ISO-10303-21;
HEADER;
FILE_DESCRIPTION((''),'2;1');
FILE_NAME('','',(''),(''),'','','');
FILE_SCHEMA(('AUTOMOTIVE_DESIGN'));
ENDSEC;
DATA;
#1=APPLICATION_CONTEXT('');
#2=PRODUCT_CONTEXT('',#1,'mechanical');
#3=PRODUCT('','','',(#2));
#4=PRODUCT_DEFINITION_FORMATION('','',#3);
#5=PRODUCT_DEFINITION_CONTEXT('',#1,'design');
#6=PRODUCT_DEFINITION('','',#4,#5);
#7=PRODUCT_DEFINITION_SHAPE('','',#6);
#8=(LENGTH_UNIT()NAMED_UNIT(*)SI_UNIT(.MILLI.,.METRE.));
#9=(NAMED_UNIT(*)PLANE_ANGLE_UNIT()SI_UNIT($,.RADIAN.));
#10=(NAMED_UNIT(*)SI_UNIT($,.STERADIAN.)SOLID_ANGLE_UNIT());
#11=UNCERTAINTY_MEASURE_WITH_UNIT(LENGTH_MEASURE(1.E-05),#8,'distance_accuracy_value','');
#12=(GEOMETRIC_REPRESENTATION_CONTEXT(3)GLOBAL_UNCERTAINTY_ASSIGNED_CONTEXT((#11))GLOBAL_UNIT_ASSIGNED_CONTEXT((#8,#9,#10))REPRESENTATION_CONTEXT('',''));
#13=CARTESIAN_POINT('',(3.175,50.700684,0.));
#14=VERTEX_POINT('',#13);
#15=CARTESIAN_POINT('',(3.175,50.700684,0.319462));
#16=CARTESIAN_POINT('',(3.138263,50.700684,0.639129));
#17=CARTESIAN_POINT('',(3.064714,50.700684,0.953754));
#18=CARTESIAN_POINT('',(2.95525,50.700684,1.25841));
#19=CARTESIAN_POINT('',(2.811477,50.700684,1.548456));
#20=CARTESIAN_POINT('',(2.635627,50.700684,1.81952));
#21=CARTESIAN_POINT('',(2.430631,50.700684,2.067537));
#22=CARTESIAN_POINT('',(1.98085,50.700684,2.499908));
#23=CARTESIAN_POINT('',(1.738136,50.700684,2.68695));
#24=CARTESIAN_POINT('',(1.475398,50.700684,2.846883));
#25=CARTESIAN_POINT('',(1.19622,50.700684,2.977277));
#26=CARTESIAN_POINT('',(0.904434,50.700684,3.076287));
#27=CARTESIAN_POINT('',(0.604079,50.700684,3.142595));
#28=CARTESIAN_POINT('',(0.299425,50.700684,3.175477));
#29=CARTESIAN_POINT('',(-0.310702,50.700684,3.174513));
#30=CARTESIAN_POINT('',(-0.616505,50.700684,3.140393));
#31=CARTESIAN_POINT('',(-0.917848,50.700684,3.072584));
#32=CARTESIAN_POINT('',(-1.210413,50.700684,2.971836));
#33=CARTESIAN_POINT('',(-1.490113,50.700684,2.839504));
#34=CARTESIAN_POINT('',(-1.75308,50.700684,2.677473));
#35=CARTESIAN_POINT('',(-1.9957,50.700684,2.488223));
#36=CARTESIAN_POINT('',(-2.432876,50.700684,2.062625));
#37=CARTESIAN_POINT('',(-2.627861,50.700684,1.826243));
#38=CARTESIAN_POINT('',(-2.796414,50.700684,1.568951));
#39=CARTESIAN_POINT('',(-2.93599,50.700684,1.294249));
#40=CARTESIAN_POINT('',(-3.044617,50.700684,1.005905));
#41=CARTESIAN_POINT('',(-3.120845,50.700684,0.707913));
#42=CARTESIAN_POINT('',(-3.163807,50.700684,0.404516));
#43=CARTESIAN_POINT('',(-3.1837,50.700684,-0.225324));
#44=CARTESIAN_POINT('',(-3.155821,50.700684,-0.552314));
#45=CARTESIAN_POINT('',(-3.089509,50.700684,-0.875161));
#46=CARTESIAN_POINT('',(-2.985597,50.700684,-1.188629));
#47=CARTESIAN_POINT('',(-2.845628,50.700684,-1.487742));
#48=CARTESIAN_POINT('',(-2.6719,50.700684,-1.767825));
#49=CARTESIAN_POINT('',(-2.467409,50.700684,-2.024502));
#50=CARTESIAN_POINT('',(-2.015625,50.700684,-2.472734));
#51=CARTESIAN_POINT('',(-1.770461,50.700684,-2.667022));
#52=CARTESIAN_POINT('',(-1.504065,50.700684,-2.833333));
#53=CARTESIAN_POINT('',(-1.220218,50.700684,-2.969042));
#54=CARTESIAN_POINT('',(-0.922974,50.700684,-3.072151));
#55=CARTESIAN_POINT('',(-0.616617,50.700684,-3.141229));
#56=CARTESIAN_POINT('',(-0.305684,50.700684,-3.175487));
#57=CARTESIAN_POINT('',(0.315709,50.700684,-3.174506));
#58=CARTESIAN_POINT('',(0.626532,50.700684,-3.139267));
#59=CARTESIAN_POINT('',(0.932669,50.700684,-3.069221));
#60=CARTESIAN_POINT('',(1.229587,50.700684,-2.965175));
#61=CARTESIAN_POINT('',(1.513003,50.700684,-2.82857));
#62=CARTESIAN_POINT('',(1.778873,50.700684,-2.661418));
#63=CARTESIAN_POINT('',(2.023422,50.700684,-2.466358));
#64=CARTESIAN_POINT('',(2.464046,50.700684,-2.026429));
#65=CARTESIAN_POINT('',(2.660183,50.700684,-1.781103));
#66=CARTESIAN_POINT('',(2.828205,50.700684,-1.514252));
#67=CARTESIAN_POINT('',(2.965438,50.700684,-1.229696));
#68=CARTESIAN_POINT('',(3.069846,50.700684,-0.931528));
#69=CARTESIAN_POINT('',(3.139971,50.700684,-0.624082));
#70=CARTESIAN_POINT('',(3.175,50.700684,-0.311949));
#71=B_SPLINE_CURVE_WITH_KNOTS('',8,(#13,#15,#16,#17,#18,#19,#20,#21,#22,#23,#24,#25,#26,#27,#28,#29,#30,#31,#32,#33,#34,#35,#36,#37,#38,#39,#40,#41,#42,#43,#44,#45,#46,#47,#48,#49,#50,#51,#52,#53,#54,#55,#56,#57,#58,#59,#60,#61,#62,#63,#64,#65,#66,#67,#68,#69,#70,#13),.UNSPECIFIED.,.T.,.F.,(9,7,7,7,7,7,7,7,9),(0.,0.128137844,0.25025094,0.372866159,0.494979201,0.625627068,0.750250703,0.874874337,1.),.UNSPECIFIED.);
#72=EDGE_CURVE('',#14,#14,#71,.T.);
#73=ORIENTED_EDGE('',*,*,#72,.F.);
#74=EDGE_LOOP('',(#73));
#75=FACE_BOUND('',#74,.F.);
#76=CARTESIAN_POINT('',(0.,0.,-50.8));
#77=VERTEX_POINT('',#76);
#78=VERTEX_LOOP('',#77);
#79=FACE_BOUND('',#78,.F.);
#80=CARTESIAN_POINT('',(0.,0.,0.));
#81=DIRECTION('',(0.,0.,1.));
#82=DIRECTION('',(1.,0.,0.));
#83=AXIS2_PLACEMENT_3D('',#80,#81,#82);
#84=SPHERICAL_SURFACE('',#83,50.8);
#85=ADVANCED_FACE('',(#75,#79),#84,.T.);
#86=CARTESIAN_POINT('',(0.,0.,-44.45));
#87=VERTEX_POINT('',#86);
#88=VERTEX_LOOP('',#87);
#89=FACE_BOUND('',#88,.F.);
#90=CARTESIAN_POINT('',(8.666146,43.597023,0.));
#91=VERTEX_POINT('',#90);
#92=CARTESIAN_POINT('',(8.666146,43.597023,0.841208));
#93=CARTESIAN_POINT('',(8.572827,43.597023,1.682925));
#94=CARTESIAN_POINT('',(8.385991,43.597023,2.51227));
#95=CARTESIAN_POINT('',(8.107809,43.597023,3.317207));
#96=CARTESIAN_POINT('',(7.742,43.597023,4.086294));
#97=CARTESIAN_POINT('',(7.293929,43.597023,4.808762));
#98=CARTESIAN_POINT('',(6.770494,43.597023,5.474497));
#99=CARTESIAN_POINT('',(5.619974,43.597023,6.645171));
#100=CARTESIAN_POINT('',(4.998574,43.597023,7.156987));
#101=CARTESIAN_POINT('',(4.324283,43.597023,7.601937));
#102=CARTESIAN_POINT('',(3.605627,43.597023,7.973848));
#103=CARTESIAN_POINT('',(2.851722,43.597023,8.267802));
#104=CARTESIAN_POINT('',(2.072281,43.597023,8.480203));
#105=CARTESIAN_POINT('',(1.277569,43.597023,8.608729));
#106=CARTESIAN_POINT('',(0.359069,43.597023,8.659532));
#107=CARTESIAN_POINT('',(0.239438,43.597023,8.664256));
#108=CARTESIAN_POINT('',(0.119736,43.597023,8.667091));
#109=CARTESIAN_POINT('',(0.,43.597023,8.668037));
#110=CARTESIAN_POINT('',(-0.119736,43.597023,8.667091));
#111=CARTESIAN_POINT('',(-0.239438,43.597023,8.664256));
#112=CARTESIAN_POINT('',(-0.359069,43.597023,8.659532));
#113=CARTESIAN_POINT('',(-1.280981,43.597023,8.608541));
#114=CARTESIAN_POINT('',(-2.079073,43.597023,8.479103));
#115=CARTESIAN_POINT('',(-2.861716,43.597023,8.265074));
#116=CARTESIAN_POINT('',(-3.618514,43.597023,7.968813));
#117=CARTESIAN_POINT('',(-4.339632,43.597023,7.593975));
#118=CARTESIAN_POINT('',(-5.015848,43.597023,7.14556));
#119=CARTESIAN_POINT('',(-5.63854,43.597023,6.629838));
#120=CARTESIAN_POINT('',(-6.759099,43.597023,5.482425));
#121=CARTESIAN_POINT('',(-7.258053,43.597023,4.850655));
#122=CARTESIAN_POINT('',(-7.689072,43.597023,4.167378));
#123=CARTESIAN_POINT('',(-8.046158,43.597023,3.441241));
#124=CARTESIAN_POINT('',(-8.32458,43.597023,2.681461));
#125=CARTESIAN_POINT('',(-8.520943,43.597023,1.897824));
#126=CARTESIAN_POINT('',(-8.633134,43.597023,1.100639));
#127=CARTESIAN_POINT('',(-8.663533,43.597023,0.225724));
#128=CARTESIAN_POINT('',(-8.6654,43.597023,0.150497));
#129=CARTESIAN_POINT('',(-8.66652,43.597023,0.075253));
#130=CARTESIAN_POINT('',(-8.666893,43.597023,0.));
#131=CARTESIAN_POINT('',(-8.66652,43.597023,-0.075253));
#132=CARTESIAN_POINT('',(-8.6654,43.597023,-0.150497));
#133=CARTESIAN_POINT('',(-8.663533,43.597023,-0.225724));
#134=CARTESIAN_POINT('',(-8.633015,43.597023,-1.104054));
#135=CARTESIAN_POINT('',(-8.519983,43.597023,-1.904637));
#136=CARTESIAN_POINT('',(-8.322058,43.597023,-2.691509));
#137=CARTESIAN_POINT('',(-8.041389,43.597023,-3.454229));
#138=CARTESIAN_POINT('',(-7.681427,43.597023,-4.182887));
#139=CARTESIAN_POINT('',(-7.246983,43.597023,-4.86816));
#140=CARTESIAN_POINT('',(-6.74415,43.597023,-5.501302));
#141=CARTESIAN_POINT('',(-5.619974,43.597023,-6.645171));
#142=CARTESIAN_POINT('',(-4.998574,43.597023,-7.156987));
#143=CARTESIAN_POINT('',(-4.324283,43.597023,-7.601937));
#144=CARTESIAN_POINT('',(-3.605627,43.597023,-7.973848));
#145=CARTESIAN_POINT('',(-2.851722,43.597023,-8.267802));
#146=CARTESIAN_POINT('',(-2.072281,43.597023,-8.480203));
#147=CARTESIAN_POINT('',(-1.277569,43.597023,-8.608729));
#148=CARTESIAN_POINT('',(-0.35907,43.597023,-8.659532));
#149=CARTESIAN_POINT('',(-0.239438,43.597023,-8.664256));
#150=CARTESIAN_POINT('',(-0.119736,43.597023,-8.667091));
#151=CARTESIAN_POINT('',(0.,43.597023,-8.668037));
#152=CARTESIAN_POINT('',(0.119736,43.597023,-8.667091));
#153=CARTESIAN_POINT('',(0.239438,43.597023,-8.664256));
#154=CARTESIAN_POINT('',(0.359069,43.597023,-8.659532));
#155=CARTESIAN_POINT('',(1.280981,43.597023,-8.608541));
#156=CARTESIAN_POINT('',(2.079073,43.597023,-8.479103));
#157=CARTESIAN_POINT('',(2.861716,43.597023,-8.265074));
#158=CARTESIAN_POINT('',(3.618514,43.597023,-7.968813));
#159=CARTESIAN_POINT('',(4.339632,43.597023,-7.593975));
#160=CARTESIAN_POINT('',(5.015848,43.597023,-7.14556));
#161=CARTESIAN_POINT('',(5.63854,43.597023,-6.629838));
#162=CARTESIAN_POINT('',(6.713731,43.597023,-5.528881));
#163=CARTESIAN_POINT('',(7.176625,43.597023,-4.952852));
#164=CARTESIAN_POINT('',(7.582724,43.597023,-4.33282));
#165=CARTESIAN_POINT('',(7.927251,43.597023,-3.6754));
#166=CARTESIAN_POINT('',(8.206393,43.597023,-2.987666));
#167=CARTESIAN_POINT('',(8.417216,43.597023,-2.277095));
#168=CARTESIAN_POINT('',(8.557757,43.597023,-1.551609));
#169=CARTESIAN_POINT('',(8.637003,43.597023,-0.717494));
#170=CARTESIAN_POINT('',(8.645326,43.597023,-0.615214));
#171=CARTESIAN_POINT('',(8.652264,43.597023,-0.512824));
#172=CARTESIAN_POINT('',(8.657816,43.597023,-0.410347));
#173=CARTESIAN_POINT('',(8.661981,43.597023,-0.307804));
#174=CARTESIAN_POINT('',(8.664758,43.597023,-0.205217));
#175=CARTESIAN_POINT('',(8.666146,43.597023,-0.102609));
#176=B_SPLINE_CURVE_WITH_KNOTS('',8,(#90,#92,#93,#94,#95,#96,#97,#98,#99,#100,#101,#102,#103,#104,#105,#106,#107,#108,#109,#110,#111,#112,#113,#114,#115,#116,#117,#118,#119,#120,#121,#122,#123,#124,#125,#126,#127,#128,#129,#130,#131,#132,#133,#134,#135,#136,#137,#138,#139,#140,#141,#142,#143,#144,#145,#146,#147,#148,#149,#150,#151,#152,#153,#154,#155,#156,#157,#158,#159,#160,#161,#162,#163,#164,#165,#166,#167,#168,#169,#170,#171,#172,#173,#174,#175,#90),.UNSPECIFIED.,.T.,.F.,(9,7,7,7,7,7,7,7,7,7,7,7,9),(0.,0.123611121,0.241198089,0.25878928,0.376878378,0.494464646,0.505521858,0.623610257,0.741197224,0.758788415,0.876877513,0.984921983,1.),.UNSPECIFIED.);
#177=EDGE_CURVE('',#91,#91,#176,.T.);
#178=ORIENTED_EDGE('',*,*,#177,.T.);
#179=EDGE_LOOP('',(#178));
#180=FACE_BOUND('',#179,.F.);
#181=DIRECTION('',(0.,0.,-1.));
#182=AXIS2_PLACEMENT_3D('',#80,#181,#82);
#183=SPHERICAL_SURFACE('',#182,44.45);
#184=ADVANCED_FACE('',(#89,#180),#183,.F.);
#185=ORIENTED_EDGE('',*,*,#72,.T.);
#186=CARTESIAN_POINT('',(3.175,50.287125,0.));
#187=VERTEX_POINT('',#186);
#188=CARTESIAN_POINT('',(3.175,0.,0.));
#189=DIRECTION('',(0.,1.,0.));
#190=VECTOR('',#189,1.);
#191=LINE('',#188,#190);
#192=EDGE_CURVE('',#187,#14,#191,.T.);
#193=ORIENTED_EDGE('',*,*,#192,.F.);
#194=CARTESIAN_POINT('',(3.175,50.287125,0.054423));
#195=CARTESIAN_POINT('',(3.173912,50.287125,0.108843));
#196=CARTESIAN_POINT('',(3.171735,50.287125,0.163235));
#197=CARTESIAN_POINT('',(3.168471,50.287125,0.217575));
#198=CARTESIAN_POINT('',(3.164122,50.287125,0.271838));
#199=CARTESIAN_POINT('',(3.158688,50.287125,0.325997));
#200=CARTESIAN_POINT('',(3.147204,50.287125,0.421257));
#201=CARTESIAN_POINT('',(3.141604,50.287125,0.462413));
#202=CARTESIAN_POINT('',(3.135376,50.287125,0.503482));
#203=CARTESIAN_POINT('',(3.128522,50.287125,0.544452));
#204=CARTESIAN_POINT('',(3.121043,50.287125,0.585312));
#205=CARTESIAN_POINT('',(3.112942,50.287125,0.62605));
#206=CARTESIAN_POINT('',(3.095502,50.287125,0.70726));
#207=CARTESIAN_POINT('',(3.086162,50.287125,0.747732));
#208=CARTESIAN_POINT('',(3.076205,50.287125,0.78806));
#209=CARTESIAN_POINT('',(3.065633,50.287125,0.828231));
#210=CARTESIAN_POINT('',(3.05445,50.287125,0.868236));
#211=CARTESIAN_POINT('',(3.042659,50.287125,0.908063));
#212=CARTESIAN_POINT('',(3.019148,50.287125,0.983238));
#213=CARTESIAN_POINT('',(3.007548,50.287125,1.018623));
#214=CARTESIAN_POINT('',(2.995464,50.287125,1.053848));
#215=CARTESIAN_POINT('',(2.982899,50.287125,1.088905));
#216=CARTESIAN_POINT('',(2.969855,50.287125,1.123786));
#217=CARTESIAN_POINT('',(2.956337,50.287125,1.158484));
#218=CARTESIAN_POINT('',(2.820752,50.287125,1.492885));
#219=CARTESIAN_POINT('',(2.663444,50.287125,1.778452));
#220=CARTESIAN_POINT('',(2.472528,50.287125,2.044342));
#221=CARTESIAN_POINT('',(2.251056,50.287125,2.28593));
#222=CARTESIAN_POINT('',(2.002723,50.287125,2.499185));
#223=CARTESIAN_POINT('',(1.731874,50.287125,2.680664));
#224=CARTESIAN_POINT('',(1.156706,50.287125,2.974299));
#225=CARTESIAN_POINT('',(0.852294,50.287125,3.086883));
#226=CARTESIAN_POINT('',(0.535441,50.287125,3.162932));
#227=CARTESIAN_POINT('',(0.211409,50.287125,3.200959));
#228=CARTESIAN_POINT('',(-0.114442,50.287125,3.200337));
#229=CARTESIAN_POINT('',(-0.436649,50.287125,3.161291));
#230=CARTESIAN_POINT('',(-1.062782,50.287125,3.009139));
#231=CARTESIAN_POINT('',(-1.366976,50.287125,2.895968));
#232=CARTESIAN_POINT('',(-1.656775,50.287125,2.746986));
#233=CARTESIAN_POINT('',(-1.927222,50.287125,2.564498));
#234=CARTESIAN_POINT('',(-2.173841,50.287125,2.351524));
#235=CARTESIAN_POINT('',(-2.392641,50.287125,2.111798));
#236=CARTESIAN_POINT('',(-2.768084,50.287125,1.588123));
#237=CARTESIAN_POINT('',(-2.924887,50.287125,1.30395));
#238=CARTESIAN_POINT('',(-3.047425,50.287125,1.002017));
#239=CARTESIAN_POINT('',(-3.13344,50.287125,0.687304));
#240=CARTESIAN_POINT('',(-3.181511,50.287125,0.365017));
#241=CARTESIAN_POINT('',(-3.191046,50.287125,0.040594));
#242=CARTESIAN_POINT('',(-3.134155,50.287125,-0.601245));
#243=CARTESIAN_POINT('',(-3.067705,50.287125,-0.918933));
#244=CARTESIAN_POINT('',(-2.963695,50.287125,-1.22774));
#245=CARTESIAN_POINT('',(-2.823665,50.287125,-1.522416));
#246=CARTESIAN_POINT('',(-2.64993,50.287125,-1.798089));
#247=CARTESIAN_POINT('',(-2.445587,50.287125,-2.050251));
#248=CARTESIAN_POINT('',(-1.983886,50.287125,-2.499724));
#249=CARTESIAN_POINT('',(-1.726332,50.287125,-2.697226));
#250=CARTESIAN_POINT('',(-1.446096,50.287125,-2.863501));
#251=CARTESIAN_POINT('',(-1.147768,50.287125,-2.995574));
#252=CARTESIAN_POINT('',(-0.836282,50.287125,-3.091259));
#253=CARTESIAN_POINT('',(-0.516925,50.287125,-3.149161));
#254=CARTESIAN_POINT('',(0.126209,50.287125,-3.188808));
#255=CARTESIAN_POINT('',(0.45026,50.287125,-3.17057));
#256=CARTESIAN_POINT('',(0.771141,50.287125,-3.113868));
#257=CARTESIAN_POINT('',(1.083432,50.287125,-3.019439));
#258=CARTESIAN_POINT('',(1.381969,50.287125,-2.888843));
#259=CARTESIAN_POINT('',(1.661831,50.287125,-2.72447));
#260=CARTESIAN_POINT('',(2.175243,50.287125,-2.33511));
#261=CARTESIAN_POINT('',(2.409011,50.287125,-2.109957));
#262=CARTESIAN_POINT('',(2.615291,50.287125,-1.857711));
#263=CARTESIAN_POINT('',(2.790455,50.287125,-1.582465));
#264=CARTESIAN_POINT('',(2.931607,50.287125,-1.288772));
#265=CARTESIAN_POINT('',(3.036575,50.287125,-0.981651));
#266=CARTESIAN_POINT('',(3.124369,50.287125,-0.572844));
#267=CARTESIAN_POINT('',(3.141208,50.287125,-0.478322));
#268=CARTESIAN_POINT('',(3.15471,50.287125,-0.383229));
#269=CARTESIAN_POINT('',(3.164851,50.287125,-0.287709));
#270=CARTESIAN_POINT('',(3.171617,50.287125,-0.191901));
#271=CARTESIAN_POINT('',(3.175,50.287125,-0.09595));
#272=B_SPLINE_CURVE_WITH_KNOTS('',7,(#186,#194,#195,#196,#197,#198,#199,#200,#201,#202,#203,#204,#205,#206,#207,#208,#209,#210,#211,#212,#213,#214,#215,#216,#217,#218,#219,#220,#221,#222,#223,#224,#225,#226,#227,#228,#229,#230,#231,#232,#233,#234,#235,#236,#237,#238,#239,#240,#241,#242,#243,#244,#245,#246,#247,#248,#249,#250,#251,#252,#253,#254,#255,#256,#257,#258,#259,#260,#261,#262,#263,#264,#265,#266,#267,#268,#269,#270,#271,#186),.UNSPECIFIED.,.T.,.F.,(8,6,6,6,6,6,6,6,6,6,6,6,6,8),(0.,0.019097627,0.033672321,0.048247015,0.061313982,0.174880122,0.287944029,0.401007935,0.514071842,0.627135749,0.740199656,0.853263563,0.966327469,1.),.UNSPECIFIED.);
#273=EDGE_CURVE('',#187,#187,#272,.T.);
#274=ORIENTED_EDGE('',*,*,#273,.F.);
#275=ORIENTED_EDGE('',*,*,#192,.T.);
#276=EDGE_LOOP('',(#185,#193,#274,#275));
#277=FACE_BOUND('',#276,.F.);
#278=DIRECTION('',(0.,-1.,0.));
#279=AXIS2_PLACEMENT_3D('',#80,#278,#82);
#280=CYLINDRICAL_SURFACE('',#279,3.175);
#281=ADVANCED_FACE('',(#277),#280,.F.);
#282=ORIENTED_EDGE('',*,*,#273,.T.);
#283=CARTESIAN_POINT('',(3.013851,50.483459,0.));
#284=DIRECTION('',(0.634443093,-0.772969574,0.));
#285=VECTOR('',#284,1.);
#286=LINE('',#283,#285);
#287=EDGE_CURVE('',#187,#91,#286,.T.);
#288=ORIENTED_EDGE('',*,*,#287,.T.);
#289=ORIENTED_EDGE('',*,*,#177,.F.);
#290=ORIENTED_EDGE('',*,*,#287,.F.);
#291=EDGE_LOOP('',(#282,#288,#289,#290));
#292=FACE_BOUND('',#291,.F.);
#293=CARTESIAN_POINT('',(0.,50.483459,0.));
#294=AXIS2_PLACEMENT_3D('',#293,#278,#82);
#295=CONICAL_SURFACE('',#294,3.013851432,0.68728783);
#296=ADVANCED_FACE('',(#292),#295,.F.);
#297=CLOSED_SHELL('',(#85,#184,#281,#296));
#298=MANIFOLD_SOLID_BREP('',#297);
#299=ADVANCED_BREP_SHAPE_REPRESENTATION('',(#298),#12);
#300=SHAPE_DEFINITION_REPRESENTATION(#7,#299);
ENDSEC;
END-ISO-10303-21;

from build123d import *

# Parameters (mm, degrees)
F2_R     = 3.175
F3_DEPTH = 101.6


# Not quite as in the source:
# - a fillet or chamfer that OpenCascade refuses, or shapes differently, is made with other operations: its cross-section is extruded or revolved along the edge and cut away or added


with BuildPart() as f1:
    # F0 (on Front) → F1 (revolve)
    with BuildSketch(Plane.XZ):
        with BuildLine():
            ThreePointArc((0, -50.8), (50.8, 0), (0, 50.8))
            Line((0, 50.8), (0, 44.45))
            ThreePointArc((0, 44.45), (44.45, 0), (0, -44.45))
            Line((0, -44.45), (0, -50.8))
        make_face()
    revolve(axis=Axis((0, 0, 0), (0, 0, -1)))

    # F2 (on Front) → F3 (cut)
    with BuildSketch(Plane.XZ):
        Circle(F2_R)
    extrude(amount=-F3_DEPTH, mode=Mode.SUBTRACT)

    # F4: chamfer of 6.35 on 1 edges, made by hand

    # F4_s1 → F4_t2 (revolve, cut)
    with BuildSketch(Plane.XY.offset(-1.2e-09)):
        with BuildLine():
            Line((3.0138514094, 50.4834593112), (8.8272948956, 43.4006886388))
            Line((8.8272948956, 43.4006886388), (8.8025344773, 43.2761257162))
            ThreePointArc((8.8025344773, 43.2761257162), (6.0073622852, 43.914006044), (3.1659285713, 44.2097865329))
            Line((3.1659285713, 44.2097865329), (3.048, 44.336462139))
            ThreePointArc((3.048, 44.336462139), (3.047999955, 47.4099607251), (2.8868514094, 50.4834593112))
            Line((2.8868514094, 50.4834593112), (3.0138514094, 50.4834593112))
        make_face()
    revolve(axis=Axis((-2.25e-08, 44.336462139, -1.2e-09), (0, -1, 0)), mode=Mode.SUBTRACT)


solid = f1.part
